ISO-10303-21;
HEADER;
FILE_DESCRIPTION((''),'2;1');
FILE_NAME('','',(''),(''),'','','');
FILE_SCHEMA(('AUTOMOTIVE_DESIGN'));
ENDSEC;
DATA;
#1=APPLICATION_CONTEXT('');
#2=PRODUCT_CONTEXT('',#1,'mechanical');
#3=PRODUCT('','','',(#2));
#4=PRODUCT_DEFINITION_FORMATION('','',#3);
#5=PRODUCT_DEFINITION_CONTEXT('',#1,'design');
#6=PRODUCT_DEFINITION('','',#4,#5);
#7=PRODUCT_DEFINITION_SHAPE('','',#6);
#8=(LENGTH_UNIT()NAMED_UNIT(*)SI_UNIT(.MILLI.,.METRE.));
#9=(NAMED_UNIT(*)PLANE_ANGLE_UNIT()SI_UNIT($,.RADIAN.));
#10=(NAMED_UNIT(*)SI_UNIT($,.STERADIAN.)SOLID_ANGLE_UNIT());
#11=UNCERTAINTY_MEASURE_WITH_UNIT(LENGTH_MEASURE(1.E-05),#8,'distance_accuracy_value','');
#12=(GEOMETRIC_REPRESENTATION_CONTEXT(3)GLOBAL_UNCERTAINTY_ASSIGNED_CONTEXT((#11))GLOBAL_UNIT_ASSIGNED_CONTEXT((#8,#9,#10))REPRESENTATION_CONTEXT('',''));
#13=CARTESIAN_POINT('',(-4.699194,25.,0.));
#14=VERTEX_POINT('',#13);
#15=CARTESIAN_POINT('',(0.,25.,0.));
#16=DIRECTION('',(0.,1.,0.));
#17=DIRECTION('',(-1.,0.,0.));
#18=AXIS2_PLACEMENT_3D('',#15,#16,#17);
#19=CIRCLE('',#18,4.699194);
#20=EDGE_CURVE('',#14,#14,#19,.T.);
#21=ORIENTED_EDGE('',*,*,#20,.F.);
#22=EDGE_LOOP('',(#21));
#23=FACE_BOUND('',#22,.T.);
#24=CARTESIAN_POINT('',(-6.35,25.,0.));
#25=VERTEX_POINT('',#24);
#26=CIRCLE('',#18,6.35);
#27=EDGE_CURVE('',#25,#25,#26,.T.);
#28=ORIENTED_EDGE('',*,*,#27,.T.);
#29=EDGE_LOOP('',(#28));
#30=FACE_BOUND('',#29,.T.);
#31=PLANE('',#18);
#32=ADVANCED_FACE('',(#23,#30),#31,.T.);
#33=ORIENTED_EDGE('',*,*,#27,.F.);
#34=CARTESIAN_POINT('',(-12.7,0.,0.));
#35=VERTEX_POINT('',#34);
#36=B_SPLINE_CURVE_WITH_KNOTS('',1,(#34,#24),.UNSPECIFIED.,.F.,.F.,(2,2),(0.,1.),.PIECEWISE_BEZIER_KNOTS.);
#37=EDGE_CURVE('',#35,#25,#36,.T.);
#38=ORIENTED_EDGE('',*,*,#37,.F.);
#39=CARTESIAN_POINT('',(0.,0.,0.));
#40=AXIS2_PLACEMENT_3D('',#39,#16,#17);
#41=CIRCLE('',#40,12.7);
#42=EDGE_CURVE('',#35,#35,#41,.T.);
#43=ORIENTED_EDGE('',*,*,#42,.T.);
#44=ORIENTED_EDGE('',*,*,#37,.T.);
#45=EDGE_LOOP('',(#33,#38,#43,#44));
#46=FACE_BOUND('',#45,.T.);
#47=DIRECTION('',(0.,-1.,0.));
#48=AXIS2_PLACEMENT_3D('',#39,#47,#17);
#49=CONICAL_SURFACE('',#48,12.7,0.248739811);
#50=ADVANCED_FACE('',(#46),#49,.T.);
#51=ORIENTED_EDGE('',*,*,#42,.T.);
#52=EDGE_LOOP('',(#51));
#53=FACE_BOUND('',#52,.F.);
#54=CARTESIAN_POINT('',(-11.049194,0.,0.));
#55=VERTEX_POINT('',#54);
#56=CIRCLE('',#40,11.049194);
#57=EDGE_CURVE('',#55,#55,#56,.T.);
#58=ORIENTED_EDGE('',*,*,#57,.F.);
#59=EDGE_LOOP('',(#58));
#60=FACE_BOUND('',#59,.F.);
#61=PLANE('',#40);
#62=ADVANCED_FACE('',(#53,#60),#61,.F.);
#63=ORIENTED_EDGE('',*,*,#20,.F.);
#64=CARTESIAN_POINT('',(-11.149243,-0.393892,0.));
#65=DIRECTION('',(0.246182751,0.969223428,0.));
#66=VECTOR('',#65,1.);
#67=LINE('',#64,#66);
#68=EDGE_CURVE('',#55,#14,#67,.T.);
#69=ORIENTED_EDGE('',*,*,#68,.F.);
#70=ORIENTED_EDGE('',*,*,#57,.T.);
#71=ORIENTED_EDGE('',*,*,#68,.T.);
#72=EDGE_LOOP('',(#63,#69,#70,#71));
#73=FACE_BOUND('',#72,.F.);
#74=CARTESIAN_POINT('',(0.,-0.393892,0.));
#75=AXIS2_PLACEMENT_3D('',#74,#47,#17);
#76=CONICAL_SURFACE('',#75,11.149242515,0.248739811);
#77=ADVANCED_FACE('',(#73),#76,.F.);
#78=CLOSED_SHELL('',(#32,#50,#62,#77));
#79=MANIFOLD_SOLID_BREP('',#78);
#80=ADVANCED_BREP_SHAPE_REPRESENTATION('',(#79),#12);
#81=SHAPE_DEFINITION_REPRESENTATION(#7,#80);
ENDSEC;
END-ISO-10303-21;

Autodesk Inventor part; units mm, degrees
ref_plane "YZ Plane" through (0, 0, 0) normal (1, 0, 0) x (0, 1, 0)
ref_plane "XY Plane" through (0, 0, 0) normal (0, 0, 1) x (1, 0, 0)
sketch "Szkic6" plane through (0, 0, 0) normal (0, 1, 0) x (-1, 0, 0)
  circle A0 centre (0, 0) radius 12.7
  dimension "d33" = 25.4
ref_plane "Płaszczyzna konstrukcyjna1" through (0, 25, 0) normal (0, 1, 0) x (-1, 0, 0)
sketch "Szkic7" plane through (0, 25, 0) normal (0, 1, 0) x (-1, 0, 0)
  circle A0 centre (0, 0) radius 6.35
  dimension "d35" = 12.7
loft "Wyciągnięcie złożone1" add profiles "Szkic6", "Szkic7"
shell "Skorupa1" thickness 1.6 removed faces 2 at (1.8127, 25, -0.4771) at (3.6254, 0, -0.9542)
equation "\"d33\" = OD1"
equation "\"d35\" = OD2"
equation "\"d52\" = THK"
equation "\"SzerokośćGięciaPodcięcia\" = Grubość"
equation "\"RozmiarPodcięciaNarożnika\" = 4 * Grubość"
equation "\"PromieńPrzejścia\" = PromieńGięcia"
equation "\"Rozmiar_promienia_Jacobiego\" = PromieńGięcia"
equation "\"Wielk_odstępu\" = Grubość"
equation "\"d2\" = PromieńGięcia"
equation "\"d23\" = PromieńGięcia"
equation "\"OD1\" = 25.4"
equation "\"OD2\" = 12.7"
equation "\"L\" = 25"
equation "\"THK\" = 1.6"
equation "\"d34\" = L"
equation "\"Grubość\" = 1.5"
equation "\"PromieńGięcia\" = 3"
properties part number "Redukcja symetryczna Ø25,4x12,7x1,6 L=25" material "304"
